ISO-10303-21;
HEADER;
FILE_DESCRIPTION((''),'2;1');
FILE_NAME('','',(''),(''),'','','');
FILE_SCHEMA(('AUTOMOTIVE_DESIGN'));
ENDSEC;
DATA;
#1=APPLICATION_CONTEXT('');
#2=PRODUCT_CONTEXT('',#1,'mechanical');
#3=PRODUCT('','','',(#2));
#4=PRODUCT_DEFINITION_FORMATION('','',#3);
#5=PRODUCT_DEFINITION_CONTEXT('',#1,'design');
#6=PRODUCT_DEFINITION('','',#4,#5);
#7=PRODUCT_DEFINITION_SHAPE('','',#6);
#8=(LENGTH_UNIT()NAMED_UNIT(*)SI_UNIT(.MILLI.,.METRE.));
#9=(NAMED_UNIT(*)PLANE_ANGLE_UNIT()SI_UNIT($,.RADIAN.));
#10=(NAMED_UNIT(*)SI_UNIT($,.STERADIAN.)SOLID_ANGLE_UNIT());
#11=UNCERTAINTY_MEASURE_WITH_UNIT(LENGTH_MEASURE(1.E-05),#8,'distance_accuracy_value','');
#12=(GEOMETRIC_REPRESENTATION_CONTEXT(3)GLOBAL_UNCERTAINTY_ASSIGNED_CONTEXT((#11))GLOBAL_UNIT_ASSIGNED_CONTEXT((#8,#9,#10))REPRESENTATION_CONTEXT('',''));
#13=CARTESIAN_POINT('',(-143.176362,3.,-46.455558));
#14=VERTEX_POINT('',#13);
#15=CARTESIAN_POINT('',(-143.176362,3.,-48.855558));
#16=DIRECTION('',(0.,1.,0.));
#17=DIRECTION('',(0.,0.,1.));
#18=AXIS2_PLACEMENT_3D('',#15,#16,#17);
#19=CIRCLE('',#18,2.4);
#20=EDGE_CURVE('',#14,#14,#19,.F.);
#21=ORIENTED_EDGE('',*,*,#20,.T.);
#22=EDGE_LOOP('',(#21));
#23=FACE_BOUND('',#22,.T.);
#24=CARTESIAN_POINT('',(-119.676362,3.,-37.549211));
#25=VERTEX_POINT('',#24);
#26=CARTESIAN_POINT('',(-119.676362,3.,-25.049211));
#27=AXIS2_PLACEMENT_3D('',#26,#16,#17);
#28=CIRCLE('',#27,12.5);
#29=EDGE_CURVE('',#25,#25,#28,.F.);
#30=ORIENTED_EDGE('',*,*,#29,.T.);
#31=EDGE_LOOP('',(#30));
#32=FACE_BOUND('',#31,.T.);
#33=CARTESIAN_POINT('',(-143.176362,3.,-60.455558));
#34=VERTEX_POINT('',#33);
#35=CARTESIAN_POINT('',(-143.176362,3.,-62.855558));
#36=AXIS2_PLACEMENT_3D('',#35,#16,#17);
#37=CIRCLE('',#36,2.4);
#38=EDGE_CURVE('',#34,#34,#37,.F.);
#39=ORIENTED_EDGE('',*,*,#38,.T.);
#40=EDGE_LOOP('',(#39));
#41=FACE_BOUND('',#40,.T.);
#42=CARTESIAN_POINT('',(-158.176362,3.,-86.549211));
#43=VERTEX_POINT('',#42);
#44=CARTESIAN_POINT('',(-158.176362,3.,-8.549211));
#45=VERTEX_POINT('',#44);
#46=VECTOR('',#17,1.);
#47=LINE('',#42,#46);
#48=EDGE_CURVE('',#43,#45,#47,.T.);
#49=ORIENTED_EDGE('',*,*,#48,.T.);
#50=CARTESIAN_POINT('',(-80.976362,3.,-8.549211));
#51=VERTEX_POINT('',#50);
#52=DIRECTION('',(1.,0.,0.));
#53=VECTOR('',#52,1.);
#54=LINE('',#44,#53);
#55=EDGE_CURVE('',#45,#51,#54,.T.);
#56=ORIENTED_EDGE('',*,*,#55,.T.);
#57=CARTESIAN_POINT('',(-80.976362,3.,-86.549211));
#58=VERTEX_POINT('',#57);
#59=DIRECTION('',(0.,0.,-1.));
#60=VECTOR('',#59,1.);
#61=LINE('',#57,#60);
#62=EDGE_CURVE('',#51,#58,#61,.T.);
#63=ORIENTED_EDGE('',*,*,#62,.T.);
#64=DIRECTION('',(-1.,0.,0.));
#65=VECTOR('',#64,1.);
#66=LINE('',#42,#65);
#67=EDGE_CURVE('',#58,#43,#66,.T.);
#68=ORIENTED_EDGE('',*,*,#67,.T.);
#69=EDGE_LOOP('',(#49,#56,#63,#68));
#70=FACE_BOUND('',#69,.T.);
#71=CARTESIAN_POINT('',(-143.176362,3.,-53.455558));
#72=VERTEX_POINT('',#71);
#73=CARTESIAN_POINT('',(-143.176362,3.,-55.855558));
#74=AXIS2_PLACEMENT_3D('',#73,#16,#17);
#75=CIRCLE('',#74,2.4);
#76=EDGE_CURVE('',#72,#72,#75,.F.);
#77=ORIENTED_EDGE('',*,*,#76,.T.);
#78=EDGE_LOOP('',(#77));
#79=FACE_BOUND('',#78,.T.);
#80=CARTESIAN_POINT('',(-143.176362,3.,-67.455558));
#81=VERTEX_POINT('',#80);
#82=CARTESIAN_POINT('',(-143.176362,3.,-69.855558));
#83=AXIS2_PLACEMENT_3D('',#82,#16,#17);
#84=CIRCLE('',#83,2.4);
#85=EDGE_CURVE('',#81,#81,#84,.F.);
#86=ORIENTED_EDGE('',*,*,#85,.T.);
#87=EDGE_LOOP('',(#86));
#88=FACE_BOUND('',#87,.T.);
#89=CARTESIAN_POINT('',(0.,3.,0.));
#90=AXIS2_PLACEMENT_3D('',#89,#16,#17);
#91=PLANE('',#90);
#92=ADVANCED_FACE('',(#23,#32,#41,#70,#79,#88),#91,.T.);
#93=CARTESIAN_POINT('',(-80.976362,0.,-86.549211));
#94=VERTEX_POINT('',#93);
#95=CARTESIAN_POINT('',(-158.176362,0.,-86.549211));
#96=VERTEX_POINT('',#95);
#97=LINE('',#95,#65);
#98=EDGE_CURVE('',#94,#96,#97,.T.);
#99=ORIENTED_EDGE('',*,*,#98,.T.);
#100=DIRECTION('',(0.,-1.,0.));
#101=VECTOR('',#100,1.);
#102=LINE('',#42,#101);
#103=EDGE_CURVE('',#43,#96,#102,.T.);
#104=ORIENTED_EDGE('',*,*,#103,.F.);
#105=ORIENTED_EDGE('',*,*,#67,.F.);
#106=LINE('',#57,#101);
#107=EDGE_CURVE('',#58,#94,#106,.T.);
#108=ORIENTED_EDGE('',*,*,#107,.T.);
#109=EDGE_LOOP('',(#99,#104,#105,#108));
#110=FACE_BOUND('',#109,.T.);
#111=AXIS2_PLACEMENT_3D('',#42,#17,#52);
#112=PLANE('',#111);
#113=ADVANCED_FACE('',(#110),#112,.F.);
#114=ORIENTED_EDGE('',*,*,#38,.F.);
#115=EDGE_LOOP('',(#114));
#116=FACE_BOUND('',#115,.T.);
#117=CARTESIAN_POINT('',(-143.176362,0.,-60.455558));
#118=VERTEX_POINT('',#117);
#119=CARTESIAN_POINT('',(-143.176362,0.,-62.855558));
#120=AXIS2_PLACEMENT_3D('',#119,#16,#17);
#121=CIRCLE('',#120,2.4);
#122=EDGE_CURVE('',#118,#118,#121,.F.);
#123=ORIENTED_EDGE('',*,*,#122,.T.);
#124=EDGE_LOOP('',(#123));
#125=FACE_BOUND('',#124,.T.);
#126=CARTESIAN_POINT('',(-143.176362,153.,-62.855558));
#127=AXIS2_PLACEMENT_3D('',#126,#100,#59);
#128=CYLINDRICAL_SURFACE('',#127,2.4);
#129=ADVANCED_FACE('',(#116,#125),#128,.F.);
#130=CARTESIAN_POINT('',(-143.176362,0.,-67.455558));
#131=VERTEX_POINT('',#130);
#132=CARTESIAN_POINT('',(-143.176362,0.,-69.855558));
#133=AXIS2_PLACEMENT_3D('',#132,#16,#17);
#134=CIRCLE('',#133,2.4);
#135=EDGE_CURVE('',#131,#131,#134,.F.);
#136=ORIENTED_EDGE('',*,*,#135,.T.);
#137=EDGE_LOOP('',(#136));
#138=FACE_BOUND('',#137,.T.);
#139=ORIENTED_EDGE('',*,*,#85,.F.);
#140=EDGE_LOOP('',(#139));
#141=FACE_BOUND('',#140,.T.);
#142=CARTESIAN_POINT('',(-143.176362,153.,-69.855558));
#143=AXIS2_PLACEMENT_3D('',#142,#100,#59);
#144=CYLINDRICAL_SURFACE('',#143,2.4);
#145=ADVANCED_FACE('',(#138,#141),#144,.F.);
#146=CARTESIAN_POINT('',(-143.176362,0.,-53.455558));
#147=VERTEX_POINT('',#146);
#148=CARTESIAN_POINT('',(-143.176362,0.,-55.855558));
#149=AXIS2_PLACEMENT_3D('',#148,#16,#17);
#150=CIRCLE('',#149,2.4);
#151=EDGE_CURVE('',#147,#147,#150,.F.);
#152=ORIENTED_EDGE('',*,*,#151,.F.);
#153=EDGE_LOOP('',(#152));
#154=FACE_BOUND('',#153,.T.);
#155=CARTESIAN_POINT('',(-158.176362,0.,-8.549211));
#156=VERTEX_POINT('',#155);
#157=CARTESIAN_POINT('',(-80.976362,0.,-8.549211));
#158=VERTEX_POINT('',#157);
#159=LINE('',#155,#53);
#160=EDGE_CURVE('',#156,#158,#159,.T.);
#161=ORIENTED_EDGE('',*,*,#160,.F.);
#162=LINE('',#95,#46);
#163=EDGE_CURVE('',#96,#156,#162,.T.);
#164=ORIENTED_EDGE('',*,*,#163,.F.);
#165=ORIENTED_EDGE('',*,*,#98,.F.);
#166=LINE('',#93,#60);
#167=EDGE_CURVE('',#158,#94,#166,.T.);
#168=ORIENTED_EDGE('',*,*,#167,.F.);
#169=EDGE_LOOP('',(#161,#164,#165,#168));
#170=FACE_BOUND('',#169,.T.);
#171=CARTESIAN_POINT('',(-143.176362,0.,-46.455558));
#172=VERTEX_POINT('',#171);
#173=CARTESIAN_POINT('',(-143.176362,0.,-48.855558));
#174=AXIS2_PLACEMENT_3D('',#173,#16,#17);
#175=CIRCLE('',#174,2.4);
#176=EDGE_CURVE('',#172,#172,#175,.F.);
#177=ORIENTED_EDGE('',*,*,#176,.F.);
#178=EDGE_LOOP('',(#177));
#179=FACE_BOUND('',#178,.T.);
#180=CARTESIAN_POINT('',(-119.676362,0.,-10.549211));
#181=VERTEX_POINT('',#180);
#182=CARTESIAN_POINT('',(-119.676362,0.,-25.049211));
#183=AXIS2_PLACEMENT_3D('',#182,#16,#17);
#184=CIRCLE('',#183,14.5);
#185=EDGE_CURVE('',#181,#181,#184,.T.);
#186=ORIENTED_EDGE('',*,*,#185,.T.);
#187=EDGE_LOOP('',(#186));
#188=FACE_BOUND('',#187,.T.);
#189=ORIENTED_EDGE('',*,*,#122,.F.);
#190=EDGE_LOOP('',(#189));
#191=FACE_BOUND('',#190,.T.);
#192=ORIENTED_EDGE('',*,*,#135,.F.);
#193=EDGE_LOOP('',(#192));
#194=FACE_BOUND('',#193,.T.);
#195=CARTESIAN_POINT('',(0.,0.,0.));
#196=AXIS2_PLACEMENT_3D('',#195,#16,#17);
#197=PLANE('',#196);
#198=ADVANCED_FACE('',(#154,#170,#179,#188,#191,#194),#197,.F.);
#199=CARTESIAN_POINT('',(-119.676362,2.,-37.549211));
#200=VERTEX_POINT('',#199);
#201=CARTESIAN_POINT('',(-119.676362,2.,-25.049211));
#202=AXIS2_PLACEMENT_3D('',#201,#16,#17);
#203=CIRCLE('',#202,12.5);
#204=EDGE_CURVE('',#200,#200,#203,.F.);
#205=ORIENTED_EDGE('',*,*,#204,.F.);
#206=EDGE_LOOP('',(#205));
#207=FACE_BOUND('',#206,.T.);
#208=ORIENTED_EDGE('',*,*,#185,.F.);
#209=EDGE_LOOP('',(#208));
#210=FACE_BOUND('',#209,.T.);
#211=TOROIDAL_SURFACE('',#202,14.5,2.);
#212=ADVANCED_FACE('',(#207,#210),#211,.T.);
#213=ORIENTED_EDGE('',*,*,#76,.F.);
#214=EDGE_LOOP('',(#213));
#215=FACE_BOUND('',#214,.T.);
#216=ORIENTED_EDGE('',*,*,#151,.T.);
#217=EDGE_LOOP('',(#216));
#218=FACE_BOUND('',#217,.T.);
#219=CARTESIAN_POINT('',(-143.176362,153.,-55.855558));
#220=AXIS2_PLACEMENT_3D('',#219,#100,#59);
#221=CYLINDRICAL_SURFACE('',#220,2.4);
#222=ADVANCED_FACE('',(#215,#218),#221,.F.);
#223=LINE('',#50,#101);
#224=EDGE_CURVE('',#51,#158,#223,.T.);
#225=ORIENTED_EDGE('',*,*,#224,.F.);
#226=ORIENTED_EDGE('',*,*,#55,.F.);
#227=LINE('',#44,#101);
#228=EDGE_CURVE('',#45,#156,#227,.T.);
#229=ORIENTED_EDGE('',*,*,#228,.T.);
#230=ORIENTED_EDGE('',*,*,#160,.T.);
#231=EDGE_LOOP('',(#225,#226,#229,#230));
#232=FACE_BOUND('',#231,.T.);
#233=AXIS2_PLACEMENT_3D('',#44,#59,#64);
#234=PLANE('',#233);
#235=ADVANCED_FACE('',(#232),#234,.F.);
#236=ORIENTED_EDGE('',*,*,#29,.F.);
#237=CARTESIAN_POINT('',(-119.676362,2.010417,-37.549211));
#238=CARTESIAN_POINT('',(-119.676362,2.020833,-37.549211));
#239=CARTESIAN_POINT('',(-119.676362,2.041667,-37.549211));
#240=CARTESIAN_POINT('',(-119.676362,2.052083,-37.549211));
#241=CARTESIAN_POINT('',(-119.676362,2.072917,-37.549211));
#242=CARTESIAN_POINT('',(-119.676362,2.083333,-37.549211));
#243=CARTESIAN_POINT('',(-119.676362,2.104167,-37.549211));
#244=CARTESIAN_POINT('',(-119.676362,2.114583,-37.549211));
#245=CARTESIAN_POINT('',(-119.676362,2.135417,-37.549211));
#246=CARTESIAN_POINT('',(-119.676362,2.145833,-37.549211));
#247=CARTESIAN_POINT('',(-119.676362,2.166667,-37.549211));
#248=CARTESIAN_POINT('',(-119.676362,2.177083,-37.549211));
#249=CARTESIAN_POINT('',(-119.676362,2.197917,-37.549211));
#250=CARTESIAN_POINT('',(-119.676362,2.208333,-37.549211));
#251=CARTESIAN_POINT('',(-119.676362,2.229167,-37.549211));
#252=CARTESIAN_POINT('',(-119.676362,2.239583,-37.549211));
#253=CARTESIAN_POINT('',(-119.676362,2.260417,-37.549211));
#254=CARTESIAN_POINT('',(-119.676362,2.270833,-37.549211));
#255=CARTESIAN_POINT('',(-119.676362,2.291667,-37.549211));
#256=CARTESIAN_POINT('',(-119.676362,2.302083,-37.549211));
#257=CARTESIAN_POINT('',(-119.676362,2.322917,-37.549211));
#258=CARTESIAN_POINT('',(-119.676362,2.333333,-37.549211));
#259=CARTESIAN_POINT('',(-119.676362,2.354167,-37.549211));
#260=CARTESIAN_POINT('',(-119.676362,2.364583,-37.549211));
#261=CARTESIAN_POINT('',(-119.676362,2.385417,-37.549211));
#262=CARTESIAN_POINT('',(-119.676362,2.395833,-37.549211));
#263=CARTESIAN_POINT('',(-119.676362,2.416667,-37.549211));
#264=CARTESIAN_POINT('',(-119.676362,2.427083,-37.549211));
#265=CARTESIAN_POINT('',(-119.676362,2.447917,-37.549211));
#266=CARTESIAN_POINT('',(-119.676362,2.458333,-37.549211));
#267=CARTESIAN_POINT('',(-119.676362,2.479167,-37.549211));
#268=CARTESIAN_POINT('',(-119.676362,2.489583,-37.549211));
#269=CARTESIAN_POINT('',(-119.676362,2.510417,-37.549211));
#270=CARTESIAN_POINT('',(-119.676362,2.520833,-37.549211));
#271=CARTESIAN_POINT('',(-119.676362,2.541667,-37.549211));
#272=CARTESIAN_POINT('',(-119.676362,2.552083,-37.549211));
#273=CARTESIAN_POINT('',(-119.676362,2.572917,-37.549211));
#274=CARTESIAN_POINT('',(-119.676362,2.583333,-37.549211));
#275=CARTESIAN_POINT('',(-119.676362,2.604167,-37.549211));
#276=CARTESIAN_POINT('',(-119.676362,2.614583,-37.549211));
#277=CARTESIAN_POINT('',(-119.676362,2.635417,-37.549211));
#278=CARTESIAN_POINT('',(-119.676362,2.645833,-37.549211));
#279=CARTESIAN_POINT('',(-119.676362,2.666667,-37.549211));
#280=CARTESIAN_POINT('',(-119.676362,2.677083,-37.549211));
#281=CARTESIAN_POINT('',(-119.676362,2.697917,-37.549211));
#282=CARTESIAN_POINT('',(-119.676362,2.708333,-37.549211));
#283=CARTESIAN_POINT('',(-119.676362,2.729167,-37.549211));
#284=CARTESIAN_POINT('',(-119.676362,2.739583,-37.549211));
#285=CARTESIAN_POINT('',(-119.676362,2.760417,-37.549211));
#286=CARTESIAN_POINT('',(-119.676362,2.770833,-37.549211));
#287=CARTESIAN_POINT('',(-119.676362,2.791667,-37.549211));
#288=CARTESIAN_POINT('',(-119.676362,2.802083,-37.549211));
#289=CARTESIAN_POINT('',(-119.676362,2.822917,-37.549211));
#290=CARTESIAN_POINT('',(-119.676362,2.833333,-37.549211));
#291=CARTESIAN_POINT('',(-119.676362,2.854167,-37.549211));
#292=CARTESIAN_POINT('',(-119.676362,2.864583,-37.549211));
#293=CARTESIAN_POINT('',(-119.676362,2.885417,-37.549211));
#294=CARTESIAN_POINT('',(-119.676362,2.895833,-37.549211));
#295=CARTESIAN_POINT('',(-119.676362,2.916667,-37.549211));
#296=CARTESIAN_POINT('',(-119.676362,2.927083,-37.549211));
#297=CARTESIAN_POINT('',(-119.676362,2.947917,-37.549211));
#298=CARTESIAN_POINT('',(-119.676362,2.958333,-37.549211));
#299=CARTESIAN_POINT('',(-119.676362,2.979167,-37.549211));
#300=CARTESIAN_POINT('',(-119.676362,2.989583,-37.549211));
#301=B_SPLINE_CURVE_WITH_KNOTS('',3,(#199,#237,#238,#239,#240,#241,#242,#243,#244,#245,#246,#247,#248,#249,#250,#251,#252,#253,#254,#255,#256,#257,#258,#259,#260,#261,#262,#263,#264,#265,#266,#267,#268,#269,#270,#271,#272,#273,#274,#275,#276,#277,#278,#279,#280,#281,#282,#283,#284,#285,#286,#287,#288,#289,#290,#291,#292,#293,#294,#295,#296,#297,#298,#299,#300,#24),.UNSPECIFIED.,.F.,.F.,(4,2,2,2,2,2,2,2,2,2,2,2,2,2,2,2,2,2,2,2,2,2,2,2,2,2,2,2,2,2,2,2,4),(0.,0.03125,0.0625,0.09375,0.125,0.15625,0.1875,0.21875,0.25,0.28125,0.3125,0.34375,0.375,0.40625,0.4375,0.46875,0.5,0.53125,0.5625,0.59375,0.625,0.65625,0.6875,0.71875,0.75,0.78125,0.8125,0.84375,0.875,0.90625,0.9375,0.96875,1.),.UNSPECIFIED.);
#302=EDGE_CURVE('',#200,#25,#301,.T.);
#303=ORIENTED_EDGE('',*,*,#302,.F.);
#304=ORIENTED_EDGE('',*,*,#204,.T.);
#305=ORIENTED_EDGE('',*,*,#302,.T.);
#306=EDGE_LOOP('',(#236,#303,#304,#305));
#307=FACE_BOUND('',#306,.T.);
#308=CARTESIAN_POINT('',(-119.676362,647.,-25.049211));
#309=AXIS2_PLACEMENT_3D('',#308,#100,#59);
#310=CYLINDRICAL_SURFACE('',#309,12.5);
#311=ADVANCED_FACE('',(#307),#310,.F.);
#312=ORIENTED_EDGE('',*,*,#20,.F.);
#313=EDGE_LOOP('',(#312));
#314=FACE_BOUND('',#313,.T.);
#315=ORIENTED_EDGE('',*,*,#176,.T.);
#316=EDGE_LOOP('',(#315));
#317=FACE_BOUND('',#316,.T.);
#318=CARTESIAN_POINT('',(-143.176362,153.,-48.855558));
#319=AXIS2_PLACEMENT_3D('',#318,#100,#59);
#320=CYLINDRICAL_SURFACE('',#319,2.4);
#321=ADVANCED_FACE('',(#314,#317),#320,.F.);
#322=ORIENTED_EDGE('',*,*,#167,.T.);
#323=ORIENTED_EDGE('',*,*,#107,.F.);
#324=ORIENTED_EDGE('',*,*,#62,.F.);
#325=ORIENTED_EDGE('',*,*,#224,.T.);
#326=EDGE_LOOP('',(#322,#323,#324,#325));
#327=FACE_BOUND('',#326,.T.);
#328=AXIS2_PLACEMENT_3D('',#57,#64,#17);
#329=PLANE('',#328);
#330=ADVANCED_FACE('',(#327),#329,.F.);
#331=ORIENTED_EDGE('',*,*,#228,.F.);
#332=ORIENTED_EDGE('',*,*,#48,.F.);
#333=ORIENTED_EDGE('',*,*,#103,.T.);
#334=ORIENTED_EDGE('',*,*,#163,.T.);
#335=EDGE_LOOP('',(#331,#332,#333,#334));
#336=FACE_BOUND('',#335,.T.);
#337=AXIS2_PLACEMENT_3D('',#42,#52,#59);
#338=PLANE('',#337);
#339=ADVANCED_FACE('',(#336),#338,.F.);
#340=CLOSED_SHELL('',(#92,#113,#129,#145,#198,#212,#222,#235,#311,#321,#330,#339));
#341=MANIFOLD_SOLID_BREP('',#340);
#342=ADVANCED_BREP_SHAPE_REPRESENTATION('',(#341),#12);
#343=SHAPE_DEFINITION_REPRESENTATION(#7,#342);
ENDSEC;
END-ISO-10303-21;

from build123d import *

# Parameters (mm, degrees)
SKETCH_1_W                = 77.2
SKETCH_1_H                = 78
EXTRUDE_1_DEPTH           = 3
CUT_EXTRUDE_1_DEPTH       = 87
CUT_EXTRUDE_1_DEPTH_BACK  = 71
SKETCH_2_R                = 9.75
CUT_EXTRUDE_3_DEPTH       = 150
CUT_EXTRUDE_3_DEPTH_BACK  = 207
SKETCH_3_R                = 2.4
SKETCH_11_W               = 34.361209151
SKETCH_11_H               = 23.148078535
EXTRUDE_4_DEPTH           = 3
CUT_EXTRUDE_10_DEPTH      = 17
CUT_EXTRUDE_10_DEPTH_BACK = 10
SKETCH_13_R               = 12
CHAMFER_4_SIZE            = 6
SKETCH_14_W               = 38.187974991
SKETCH_14_H               = 34.221306214
EXTRUDE_5_DEPTH           = 3
CUT_EXTRUDE_11_DEPTH      = 644
CUT_EXTRUDE_11_DEPTH_BACK = 12256
SKETCH_15_R               = 12.5
EXTRUDE_6_DEPTH           = 1
EXTRUDE_6_DEPTH_BACK      = 3
SKETCH_16_W               = 18.047356328
SKETCH_16_H               = 3.010605737
SKETCH_17_W               = 19.670999845
SKETCH_17_H               = 3.661099776
CUT_EXTRUDE_12_DEPTH      = 1
FILLET_1_R                = 2


with BuildPart() as part:
    # Эскиз1 → Бобышка-Вытянуть1 (new body)
    with BuildSketch(Plane(origin=(0, 0, 0), x_dir=(1, 0, 0), z_dir=(0, 1, 0))):
        with Locations((-119.576362238, 47.549210869)):
            Rectangle(SKETCH_1_W, SKETCH_1_H)
    extrude(amount=EXTRUDE_1_DEPTH)

    # Эскиз2 → Вырез-Вытянуть1 (cut, two sides: drawn at the far end of the back side and taken through both)
    with BuildSketch(Plane(origin=(0, 3, 0), x_dir=(1, 0, 0), z_dir=(0, 1, 0)).offset(-CUT_EXTRUDE_1_DEPTH_BACK)):
        with Locations(Location((-119.576362238, 22.549210869, 0), (0, 0, 270))):
            Circle(SKETCH_2_R)
    extrude(amount=CUT_EXTRUDE_1_DEPTH + CUT_EXTRUDE_1_DEPTH_BACK, mode=Mode.SUBTRACT)

    # Эскиз3 → Вырез-Вытянуть3 (cut, two sides: drawn at the far end of the back side and taken through both)
    with BuildSketch(Plane(origin=(0, 3, 0), x_dir=(1, 0, 0), z_dir=(0, 1, 0)).offset(-CUT_EXTRUDE_3_DEPTH_BACK)):
        with Locations(Location((-143.176362238, 69.855558065, 0), (0, 0, 270))):
            Circle(SKETCH_3_R)
        with Locations(Location((-143.176362238, 62.855558065, 0), (0, 0, 270))):
            Circle(SKETCH_3_R)
        with Locations(Location((-143.176362238, 55.855558065, 0), (0, 0, 270))):
            Circle(SKETCH_3_R)
        with Locations(Location((-143.176362238, 48.855558065, 0), (0, 0, 270))):
            Circle(SKETCH_3_R)
    extrude(amount=CUT_EXTRUDE_3_DEPTH + CUT_EXTRUDE_3_DEPTH_BACK, mode=Mode.SUBTRACT)

    # Эскиз11 → Бобышка-Вытянуть4 (add)
    with BuildSketch(Plane.XZ):
        with Locations((-119.254790978, -23.284724875)):
            Rectangle(SKETCH_11_W, SKETCH_11_H)
    extrude(amount=-EXTRUDE_4_DEPTH)

    # Эскиз13 → Вырез-Вытянуть10 (cut, two sides: drawn at the far end of the back side and taken through both)
    with BuildSketch(Plane(origin=(0, 3, 0), x_dir=(1, 0, 0), z_dir=(0, 1, 0)).offset(-CUT_EXTRUDE_10_DEPTH_BACK)):
        with Locations(Location((-119.676362238, 27.549210869, 0), (0, 0, 270))):
            Circle(SKETCH_13_R)
    extrude(amount=CUT_EXTRUDE_10_DEPTH + CUT_EXTRUDE_10_DEPTH_BACK, mode=Mode.SUBTRACT)

    # Фаска4
    # the kernel refuses this chamfer: 6 mm, written as the material it takes off along each edge
    with BuildSketch(Plane(origin=(-119.676362238, 0, -27.549210869), x_dir=(0, 0, 1), z_dir=(-1, 0, 0))) as chamfer_4_piece_1:
        Polygon((12 + CHAMFER_4_SIZE, 0), (12, CHAMFER_4_SIZE), (12, 0), align=None)
    revolve(axis=Axis((-119.676362238, 0, -27.549210869), (0, 1, 0)), mode=Mode.SUBTRACT)

    # Эскиз14 → Бобышка-Вытянуть5 (add)
    with BuildSketch(Plane(origin=(0, 3, 0), x_dir=(1, 0, 0), z_dir=(0, 1, 0))):
        with Locations((-119.593003147, 28.62902577)):
            Rectangle(SKETCH_14_W, SKETCH_14_H)
    extrude(amount=-EXTRUDE_5_DEPTH)

    # Эскиз15 → Вырез-Вытянуть11 (cut, two sides: drawn at the far end of the back side and taken through both)
    with BuildSketch(Plane(origin=(0, 3, 0), x_dir=(1, 0, 0), z_dir=(0, 1, 0)).offset(-CUT_EXTRUDE_11_DEPTH_BACK)):
        with Locations(Location((-119.676362238, 25.049210869, 0), (0, 0, 90))):
            Circle(SKETCH_15_R)
    extrude(amount=CUT_EXTRUDE_11_DEPTH + CUT_EXTRUDE_11_DEPTH_BACK, mode=Mode.SUBTRACT)

    # Эскиз16 → Бобышка-Вытянуть6 (add, two sides: drawn at the far end of the back side and taken through both)
    with BuildSketch(Plane.XZ.offset(-EXTRUDE_6_DEPTH_BACK)):
        with Locations((-119.464156945, -10.715514892)):
            Rectangle(SKETCH_16_W, SKETCH_16_H)
    extrude(amount=EXTRUDE_6_DEPTH + EXTRUDE_6_DEPTH_BACK)

    # Эскиз17 → Вырез-Вытянуть12 (cut)
    with BuildSketch(Plane(origin=(0, 0, 0), x_dir=(-1, 0, 0), z_dir=(0, -1, 0))):
        with Locations((119.795379251, 10.745864147)):
            Rectangle(SKETCH_17_W, SKETCH_17_H)
    extrude(amount=CUT_EXTRUDE_12_DEPTH, mode=Mode.SUBTRACT)

    # Скругление1
    fillet_1_edges = [part.edges().sort_by_distance(p)[0] for p in [
        (-119.676362238, 0, -12.549210869),
    ]]
    fillet(fillet_1_edges, radius=FILLET_1_R)


solid = part.part
